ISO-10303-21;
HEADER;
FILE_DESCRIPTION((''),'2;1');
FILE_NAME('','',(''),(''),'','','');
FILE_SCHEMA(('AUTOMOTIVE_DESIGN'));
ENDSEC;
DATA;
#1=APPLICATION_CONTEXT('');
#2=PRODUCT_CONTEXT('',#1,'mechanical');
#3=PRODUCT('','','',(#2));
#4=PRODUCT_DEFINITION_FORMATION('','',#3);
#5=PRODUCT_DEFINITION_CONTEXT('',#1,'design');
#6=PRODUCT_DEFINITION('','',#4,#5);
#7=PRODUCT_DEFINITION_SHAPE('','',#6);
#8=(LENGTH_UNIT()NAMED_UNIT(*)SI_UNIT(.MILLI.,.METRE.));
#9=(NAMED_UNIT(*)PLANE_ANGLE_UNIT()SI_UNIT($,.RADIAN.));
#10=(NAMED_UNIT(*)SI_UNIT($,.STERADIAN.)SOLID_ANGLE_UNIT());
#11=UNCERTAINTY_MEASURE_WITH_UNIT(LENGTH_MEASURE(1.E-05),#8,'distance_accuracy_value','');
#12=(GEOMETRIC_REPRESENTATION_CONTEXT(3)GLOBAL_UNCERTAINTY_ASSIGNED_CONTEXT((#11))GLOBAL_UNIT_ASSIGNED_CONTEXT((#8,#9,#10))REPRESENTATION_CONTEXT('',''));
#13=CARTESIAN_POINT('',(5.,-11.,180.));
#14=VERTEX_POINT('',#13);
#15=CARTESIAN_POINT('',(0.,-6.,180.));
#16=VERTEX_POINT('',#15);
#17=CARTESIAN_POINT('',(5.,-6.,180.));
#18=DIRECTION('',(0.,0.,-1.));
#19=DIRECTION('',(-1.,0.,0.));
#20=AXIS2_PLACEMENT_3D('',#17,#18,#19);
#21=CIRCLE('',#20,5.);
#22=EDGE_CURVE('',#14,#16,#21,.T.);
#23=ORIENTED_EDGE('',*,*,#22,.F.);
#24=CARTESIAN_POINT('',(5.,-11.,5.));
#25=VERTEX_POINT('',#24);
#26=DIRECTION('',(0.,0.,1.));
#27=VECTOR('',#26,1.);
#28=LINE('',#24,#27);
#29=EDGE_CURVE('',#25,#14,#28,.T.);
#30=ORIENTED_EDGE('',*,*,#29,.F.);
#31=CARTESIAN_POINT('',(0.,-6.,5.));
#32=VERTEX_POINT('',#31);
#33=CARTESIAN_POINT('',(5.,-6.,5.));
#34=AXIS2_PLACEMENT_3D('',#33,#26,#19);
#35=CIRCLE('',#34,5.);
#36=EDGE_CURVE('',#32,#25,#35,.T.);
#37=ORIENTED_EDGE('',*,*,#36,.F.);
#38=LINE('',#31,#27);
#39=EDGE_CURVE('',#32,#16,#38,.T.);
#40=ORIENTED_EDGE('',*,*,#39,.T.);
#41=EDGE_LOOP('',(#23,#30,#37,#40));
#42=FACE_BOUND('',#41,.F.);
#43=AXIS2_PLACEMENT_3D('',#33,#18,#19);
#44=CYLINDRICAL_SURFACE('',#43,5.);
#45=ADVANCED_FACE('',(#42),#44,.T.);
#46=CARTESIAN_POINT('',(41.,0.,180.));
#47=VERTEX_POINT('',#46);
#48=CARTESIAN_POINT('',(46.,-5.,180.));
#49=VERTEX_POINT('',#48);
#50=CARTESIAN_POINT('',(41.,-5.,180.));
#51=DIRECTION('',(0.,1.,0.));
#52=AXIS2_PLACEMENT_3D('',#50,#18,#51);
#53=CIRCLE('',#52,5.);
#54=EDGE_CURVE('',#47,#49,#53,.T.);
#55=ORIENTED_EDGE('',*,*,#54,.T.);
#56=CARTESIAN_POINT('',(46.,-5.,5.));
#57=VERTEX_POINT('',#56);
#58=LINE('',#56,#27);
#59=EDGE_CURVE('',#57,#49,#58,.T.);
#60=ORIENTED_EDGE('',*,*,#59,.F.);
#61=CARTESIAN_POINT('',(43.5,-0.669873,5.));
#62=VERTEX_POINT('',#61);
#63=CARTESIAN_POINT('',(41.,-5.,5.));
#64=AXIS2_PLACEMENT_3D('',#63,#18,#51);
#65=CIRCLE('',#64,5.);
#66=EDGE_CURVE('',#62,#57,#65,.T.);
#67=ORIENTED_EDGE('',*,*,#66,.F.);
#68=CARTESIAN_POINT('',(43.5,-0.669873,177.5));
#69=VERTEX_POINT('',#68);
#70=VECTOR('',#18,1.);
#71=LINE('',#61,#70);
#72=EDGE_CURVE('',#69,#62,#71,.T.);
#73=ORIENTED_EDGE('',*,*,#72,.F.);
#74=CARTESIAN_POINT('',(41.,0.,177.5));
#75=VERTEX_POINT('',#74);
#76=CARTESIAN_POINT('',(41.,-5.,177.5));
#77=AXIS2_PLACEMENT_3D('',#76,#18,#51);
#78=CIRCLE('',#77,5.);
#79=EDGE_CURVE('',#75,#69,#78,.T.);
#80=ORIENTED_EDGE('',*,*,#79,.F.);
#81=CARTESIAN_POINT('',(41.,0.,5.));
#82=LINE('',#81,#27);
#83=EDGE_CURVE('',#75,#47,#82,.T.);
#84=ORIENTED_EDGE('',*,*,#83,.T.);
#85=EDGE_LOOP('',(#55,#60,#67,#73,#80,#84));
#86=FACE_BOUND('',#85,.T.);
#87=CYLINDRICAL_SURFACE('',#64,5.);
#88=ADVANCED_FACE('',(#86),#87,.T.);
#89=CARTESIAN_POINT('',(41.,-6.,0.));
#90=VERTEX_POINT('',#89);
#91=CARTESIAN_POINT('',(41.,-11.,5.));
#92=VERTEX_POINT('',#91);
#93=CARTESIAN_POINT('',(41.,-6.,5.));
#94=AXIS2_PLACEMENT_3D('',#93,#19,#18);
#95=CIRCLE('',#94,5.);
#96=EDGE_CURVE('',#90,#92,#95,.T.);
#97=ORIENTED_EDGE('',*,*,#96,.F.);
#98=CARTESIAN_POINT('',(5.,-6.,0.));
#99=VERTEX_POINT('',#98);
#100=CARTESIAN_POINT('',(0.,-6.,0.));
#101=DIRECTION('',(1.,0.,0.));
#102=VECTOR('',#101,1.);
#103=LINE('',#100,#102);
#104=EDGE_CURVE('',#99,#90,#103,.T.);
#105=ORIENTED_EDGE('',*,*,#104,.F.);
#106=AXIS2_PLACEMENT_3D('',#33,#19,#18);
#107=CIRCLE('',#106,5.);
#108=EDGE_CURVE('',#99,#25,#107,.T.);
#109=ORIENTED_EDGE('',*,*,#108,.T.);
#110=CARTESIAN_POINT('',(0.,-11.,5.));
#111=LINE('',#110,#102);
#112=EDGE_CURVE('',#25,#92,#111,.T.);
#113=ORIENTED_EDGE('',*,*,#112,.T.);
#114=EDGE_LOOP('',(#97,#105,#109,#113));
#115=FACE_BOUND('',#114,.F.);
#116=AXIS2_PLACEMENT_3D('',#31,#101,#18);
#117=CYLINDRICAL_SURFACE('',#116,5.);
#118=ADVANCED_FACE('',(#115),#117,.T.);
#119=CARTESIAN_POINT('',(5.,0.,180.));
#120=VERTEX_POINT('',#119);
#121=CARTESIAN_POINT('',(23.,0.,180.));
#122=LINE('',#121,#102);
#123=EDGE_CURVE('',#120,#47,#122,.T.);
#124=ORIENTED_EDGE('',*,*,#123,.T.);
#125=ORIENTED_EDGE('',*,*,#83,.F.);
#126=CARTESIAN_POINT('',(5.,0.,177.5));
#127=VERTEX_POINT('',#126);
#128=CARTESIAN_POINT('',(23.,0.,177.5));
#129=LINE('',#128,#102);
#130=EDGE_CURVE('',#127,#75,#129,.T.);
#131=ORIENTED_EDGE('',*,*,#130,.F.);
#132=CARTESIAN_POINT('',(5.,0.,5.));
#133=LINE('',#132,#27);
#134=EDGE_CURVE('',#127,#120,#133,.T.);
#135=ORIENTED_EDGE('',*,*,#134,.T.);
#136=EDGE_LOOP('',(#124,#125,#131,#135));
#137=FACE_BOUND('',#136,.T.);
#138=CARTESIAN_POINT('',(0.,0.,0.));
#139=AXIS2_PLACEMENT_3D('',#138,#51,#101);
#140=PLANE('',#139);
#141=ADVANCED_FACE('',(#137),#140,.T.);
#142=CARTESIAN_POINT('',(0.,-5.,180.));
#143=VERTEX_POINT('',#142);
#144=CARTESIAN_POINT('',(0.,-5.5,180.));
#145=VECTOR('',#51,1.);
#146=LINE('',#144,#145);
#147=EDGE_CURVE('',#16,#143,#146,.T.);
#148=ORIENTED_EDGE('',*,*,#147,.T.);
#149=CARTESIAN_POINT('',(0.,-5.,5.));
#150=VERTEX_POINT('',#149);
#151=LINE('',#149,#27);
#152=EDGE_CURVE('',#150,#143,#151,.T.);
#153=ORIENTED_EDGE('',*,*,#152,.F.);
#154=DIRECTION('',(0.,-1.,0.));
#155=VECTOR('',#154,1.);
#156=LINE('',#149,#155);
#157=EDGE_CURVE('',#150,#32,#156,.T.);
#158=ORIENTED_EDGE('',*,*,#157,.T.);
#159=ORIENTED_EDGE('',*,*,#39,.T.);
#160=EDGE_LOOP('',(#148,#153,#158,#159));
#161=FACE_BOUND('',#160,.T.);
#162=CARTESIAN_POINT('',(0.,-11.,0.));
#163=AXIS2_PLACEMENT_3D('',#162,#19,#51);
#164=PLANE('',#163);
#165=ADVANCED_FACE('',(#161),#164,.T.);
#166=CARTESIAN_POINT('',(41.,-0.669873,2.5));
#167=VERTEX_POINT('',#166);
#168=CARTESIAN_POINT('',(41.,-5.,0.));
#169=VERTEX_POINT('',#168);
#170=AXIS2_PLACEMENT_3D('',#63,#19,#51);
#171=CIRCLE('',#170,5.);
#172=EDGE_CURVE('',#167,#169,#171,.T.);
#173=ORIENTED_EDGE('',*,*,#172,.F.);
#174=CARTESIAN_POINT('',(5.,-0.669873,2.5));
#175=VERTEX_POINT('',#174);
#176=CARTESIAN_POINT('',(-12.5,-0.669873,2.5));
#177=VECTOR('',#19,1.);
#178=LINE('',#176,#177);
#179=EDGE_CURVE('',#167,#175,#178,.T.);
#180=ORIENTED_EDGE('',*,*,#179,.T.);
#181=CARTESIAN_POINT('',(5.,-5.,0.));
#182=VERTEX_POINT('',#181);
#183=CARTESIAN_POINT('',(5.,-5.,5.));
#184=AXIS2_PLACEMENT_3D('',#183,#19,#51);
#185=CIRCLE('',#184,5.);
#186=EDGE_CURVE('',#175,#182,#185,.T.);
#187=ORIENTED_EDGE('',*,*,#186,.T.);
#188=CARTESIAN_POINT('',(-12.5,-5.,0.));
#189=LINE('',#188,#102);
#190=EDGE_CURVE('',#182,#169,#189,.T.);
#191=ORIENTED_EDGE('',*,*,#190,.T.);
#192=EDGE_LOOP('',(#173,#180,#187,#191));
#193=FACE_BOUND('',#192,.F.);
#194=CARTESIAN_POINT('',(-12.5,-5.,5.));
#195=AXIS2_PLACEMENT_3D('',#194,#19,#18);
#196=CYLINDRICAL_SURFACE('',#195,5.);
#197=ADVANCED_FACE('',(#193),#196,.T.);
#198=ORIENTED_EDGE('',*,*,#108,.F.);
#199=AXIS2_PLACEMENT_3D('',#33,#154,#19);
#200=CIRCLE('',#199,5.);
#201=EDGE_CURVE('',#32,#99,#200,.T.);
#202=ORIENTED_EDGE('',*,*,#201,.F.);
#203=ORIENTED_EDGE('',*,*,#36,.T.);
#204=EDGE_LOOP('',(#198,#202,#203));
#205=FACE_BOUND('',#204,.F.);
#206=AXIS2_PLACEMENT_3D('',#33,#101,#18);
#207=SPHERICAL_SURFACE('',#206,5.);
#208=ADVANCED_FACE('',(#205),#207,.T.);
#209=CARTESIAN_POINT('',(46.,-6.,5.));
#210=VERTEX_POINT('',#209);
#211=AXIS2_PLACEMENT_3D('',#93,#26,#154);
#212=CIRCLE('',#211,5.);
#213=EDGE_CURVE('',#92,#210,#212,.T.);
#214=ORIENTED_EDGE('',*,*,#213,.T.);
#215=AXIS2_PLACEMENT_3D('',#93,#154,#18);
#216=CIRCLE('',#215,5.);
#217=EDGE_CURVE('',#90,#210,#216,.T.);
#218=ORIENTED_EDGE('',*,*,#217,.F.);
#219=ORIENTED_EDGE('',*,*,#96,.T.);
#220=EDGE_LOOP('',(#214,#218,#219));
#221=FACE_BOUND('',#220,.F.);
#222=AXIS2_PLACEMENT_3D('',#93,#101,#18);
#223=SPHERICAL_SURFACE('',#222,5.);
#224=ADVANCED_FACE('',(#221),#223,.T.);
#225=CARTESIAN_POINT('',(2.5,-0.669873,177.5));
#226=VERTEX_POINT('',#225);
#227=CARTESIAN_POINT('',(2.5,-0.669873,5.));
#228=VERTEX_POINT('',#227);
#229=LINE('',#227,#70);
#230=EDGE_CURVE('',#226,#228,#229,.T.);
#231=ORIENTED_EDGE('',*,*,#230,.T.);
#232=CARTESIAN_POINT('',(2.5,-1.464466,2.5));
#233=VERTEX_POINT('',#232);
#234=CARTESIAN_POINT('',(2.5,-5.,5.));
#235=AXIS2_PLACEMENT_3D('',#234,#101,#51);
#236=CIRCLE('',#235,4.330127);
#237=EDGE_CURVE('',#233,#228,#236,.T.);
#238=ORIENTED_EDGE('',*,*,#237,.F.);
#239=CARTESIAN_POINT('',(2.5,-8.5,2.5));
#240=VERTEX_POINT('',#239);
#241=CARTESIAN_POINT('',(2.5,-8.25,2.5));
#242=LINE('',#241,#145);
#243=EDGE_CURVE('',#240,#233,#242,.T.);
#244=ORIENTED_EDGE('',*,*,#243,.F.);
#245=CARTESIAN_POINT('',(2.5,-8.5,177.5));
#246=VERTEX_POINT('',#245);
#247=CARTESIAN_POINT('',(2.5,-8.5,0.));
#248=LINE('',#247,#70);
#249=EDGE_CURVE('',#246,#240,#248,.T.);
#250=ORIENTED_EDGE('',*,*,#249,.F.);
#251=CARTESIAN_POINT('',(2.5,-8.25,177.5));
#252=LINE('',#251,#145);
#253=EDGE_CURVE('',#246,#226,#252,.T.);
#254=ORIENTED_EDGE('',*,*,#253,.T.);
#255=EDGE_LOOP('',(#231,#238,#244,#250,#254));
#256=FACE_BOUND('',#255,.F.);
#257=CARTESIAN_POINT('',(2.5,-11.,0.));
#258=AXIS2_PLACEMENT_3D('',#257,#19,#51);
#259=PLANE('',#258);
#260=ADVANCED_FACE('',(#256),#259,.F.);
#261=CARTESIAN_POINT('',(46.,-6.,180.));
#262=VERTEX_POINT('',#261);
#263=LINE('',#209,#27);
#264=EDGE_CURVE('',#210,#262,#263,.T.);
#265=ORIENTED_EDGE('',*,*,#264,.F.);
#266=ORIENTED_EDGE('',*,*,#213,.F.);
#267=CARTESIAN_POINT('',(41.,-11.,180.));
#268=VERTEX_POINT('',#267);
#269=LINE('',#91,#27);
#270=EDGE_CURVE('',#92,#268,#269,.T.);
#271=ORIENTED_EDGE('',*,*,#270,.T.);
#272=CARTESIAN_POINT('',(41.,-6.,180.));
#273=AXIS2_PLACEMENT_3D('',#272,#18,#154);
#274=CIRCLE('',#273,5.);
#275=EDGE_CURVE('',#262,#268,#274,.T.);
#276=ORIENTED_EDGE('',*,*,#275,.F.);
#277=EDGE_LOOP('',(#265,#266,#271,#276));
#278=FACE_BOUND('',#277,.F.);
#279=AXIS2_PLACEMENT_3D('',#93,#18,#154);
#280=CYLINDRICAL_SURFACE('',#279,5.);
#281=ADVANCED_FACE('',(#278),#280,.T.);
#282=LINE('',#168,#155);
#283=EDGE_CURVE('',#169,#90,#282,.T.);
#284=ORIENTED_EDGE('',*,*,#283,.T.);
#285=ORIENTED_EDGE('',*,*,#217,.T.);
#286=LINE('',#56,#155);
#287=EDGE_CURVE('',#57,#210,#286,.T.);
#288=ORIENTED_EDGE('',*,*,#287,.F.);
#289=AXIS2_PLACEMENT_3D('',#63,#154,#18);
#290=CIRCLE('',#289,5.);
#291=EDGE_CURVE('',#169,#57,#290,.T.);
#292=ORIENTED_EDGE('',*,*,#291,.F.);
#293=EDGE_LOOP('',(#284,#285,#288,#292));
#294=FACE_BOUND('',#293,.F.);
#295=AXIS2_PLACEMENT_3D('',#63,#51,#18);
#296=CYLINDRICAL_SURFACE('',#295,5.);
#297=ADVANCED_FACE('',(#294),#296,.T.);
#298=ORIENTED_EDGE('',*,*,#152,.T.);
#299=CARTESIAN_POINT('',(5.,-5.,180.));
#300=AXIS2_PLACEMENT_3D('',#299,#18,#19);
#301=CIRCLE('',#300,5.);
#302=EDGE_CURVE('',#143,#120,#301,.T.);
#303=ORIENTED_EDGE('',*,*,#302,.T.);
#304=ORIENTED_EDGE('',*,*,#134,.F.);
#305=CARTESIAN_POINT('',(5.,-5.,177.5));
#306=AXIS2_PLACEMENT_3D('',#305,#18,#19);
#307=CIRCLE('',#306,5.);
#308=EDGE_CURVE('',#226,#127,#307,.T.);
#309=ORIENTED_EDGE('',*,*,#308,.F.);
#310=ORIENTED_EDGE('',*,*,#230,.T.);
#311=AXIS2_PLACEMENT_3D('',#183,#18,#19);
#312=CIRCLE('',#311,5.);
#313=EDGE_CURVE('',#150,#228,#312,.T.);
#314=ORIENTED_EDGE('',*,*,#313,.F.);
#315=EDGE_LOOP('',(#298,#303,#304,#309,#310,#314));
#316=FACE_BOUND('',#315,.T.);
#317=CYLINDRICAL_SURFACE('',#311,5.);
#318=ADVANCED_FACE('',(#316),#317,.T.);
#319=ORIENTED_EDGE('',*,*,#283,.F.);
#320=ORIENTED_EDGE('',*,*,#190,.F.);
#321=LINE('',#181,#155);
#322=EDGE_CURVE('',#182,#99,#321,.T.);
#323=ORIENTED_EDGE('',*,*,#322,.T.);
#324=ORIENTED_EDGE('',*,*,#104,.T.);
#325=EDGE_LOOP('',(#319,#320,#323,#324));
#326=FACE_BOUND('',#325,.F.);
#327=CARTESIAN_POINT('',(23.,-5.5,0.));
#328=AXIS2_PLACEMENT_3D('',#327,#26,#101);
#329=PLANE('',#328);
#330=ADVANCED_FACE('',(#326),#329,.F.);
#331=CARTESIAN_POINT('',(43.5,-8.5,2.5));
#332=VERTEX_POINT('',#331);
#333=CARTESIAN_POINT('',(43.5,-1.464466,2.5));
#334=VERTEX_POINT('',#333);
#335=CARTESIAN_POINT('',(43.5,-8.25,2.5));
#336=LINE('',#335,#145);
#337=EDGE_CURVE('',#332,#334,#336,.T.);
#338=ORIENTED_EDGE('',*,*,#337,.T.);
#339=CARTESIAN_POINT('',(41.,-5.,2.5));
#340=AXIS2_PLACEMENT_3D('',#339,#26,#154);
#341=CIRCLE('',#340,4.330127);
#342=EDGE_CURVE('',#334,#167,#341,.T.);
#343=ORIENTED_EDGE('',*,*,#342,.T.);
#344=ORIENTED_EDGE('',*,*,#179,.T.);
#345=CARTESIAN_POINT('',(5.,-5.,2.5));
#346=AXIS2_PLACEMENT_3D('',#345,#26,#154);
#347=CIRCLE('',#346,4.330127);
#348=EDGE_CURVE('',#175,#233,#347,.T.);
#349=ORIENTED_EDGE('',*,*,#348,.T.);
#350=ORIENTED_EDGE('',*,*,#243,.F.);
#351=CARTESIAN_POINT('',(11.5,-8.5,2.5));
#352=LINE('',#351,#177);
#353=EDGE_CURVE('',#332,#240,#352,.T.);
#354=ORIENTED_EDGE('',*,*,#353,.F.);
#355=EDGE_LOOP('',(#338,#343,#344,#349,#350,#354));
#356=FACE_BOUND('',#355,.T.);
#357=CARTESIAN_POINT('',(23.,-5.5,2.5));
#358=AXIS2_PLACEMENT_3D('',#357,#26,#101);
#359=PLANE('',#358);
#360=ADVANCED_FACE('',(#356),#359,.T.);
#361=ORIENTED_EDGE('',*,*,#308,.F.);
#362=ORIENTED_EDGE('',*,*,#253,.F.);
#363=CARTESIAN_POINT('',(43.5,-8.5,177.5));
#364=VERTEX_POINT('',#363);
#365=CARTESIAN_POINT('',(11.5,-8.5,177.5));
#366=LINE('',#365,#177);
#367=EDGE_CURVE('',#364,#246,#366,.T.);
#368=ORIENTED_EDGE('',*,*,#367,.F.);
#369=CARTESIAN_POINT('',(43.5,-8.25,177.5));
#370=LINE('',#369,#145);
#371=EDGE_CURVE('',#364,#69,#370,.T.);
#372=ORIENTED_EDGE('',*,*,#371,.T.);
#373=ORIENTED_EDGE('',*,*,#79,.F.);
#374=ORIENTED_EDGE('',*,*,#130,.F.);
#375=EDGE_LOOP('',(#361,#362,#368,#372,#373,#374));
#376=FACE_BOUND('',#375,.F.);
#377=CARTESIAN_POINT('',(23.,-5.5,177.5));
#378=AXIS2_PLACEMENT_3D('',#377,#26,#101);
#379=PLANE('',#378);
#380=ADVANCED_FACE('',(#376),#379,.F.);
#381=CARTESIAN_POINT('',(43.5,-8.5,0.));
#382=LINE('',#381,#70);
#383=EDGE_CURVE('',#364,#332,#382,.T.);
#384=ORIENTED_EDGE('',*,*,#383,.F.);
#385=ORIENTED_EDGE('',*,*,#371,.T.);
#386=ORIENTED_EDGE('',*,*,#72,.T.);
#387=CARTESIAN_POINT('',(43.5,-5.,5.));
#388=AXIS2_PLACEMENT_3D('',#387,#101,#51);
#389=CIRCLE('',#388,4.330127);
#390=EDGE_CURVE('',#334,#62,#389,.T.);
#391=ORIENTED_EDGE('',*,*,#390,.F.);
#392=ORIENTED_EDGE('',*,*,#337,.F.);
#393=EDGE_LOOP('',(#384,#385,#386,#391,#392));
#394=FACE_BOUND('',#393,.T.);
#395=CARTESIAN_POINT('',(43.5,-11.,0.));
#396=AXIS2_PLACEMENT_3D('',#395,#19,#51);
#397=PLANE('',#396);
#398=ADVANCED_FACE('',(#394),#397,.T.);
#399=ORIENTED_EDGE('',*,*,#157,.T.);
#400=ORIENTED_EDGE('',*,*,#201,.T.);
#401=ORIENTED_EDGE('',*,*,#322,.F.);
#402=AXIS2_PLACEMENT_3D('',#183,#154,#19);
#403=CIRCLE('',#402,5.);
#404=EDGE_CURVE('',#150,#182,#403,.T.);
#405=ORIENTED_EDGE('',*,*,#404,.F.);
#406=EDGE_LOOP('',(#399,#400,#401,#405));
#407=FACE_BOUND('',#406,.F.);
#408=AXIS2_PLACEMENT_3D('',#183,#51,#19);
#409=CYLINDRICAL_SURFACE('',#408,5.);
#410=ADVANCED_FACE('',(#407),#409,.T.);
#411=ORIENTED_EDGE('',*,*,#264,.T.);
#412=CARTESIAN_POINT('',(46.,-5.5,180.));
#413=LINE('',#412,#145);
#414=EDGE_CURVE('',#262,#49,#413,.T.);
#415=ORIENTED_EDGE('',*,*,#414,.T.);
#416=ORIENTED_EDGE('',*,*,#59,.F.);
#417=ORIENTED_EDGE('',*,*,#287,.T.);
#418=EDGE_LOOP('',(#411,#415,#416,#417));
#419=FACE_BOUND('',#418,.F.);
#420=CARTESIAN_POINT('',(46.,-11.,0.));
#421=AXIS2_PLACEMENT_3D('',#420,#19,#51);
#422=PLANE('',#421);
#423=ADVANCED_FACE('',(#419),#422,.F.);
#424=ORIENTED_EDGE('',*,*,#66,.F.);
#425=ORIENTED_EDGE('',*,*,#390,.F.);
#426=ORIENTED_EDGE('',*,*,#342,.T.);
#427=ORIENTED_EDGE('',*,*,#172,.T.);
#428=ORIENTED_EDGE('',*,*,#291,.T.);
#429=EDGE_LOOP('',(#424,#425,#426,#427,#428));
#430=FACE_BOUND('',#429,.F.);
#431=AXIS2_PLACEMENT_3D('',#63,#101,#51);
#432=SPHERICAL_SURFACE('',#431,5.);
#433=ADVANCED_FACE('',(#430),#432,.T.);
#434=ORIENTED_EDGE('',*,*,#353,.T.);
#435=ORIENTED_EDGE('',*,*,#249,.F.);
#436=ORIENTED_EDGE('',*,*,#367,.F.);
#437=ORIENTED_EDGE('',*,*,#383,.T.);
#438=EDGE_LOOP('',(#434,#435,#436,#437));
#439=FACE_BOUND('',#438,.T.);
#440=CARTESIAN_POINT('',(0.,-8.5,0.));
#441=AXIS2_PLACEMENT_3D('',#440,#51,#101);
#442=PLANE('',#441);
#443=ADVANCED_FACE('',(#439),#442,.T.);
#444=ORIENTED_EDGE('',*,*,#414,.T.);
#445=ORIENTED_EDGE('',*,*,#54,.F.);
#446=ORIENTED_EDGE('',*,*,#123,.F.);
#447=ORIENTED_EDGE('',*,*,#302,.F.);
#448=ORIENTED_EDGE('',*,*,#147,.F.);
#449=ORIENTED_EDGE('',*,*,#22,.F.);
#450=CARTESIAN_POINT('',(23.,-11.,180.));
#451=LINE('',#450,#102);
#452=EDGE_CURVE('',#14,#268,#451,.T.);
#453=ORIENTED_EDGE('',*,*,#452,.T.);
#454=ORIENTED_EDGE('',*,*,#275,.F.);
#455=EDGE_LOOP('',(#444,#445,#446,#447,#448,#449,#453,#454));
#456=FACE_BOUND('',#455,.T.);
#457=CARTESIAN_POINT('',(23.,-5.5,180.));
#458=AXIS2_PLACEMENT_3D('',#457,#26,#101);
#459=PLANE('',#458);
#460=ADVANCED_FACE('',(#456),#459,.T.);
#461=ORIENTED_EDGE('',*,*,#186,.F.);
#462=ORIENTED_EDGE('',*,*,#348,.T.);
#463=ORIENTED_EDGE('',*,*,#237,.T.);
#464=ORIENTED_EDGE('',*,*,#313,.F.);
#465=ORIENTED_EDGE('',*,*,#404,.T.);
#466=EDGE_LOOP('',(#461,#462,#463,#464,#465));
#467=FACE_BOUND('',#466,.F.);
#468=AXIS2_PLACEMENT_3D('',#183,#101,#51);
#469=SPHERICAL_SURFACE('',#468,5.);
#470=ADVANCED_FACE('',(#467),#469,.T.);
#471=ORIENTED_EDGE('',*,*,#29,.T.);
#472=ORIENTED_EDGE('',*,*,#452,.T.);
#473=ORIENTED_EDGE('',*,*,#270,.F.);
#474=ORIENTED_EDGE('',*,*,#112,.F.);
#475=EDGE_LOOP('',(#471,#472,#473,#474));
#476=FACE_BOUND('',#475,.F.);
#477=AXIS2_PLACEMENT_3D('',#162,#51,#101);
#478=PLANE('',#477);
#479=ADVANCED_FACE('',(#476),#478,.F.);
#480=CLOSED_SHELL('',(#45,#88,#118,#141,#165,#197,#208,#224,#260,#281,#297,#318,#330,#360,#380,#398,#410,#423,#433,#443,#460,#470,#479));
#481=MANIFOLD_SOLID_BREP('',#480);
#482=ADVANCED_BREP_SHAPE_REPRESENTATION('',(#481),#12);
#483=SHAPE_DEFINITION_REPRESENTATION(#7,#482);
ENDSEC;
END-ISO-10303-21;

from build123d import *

# Parameters (mm, degrees)
F0_W         = 46
F0_H         = 11
F1_DEPTH     = 180
F2_T         = -2.5
F3_T1_DEPTH  = 71
F4_R         = 5
F5_T1_DEPTH  = 187.5
F5_T3_DEPTH  = 1
F5_T6_ANGLE  = 90
F5_T8_ANGLE  = 89.9999999974
F5_T10_ANGLE = 90
F5_T12_ANGLE = 89.9999999974


# Not quite as in the source:
# - a fillet or chamfer that OpenCascade refuses, or shapes differently, is made with other operations: its cross-section is extruded or revolved along the edge and cut away or added


with BuildPart() as f1:
    # F0 (on Top) → F1 (new body)
    with BuildSketch(Plane.XY):
        with Locations((23, -5.5)):
            Rectangle(F0_W, F0_H)
    extrude(amount=F1_DEPTH)

    # F2
    f2_openings = [f1.faces().sort_by_distance(p)[0] for p in [
        (23, 0, 90),
    ]]
    offset(amount=F2_T, openings=f2_openings)

    # F3: fillet of radius 5 on 1 edges, made by hand

    # F3_s2 → F3_t1 (cut)
    with BuildSketch(Plane.YZ.offset(-12.5)):
        with BuildLine():
            ThreePointArc((-5, 0), (-1.4644660941, 1.4644660941), (0, 5))
            Line((0, 5), (0, 0))
            Line((0, 0), (-5, 0))
        make_face()
    extrude(amount=F3_T1_DEPTH, mode=Mode.SUBTRACT)

    # F4
    f4_edges = [f1.edges().sort_by_distance(p)[0] for p in [
        (23, -11, 0),
    ]]
    fillet(f4_edges, radius=F4_R)

    # F5: fillet of radius 5 on 2 edges, made by hand

    # F5_s2 → F5_t1 (cut)
    with BuildSketch(Plane.XY.offset(5)):
        with BuildLine():
            ThreePointArc((0, -6), (1.4644660941, -9.5355339059), (5, -11))
            Line((5, -11), (0, -11))
            Line((0, -11), (0, -6))
        make_face()
        with BuildLine():
            ThreePointArc((41, -11), (44.5355339059, -9.5355339059), (46, -6))
            Line((46, -6), (46, -11))
            Line((46, -11), (41, -11))
        make_face()
        with BuildLine():
            ThreePointArc((41, 0), (44.5355339059, -1.4644660941), (46, -5))
            Line((46, -5), (46, 0))
            Line((46, 0), (41, 0))
        make_face()
        with BuildLine():
            ThreePointArc((0, -5), (1.4644660941, -1.4644660941), (5, 0))
            Line((5, 0), (0, 0))
            Line((0, 0), (0, -5))
        make_face()
    extrude(amount=F5_T1_DEPTH, mode=Mode.SUBTRACT)

    # F5_s4 → F5_t3 (cut)
    with BuildSketch(Plane.XZ.offset(5)):
        with BuildLine():
            ThreePointArc((41, 0), (44.5355339059, 1.4644660941), (46, 5))
            Line((46, 5), (46, 0))
            Line((46, 0), (41, 0))
        make_face()
        with BuildLine():
            ThreePointArc((0, 5), (1.4644660941, 1.4644660941), (5, 0))
            Line((5, 0), (0, 0))
            Line((0, 0), (0, 5))
        make_face()
    extrude(amount=F5_T3_DEPTH, mode=Mode.SUBTRACT)

    # F5_s5 → F5_t6 (revolve, cut)
    with BuildSketch(Plane.XZ.offset(6)):
        with BuildLine():
            ThreePointArc((41, 0), (44.5355339059, 1.4644660941), (46, 5))
            Line((46, 5), (46, 0))
            Line((46, 0), (41, 0))
        make_face()
    revolve(axis=Axis((46, -6, 5), (-1, 0, 0)), revolution_arc=F5_T6_ANGLE, mode=Mode.SUBTRACT)

    # F5_s7 → F5_t8 (revolve, cut)
    with BuildSketch(Plane.XY.offset(5.0000000001)):
        with BuildLine():
            ThreePointArc((41, 0), (44.5355339059, -1.4644660941), (46, -5))
            Line((46, -5), (46, 0))
            Line((46, 0), (41, 0))
        make_face()
    revolve(axis=Axis((46, -5.0000000001, 5.0000000001), (-1, 0, 0)), revolution_arc=F5_T8_ANGLE, mode=Mode.SUBTRACT)

    # F5_s9 → F5_t10 (revolve, cut)
    with BuildSketch(Plane.XZ.offset(6)):
        with BuildLine():
            ThreePointArc((0, 5), (1.4644660941, 1.4644660941), (5, 0))
            Line((5, 0), (0, 0))
            Line((0, 0), (0, 5))
        make_face()
    revolve(axis=Axis((0, -6, 5), (-1, 0, 0)), revolution_arc=F5_T10_ANGLE, mode=Mode.SUBTRACT)

    # F5_s11 → F5_t12 (revolve, cut)
    with BuildSketch(Plane.XY.offset(5.0000000001)):
        with BuildLine():
            ThreePointArc((0, -5), (1.4644660941, -1.4644660941), (5, 0))
            Line((5, 0), (0, 0))
            Line((0, 0), (0, -5))
        make_face()
    revolve(axis=Axis((0, -5.0000000001, 5.0000000001), (-1, 0, 0)), revolution_arc=F5_T12_ANGLE, mode=Mode.SUBTRACT)


solid = f1.part
